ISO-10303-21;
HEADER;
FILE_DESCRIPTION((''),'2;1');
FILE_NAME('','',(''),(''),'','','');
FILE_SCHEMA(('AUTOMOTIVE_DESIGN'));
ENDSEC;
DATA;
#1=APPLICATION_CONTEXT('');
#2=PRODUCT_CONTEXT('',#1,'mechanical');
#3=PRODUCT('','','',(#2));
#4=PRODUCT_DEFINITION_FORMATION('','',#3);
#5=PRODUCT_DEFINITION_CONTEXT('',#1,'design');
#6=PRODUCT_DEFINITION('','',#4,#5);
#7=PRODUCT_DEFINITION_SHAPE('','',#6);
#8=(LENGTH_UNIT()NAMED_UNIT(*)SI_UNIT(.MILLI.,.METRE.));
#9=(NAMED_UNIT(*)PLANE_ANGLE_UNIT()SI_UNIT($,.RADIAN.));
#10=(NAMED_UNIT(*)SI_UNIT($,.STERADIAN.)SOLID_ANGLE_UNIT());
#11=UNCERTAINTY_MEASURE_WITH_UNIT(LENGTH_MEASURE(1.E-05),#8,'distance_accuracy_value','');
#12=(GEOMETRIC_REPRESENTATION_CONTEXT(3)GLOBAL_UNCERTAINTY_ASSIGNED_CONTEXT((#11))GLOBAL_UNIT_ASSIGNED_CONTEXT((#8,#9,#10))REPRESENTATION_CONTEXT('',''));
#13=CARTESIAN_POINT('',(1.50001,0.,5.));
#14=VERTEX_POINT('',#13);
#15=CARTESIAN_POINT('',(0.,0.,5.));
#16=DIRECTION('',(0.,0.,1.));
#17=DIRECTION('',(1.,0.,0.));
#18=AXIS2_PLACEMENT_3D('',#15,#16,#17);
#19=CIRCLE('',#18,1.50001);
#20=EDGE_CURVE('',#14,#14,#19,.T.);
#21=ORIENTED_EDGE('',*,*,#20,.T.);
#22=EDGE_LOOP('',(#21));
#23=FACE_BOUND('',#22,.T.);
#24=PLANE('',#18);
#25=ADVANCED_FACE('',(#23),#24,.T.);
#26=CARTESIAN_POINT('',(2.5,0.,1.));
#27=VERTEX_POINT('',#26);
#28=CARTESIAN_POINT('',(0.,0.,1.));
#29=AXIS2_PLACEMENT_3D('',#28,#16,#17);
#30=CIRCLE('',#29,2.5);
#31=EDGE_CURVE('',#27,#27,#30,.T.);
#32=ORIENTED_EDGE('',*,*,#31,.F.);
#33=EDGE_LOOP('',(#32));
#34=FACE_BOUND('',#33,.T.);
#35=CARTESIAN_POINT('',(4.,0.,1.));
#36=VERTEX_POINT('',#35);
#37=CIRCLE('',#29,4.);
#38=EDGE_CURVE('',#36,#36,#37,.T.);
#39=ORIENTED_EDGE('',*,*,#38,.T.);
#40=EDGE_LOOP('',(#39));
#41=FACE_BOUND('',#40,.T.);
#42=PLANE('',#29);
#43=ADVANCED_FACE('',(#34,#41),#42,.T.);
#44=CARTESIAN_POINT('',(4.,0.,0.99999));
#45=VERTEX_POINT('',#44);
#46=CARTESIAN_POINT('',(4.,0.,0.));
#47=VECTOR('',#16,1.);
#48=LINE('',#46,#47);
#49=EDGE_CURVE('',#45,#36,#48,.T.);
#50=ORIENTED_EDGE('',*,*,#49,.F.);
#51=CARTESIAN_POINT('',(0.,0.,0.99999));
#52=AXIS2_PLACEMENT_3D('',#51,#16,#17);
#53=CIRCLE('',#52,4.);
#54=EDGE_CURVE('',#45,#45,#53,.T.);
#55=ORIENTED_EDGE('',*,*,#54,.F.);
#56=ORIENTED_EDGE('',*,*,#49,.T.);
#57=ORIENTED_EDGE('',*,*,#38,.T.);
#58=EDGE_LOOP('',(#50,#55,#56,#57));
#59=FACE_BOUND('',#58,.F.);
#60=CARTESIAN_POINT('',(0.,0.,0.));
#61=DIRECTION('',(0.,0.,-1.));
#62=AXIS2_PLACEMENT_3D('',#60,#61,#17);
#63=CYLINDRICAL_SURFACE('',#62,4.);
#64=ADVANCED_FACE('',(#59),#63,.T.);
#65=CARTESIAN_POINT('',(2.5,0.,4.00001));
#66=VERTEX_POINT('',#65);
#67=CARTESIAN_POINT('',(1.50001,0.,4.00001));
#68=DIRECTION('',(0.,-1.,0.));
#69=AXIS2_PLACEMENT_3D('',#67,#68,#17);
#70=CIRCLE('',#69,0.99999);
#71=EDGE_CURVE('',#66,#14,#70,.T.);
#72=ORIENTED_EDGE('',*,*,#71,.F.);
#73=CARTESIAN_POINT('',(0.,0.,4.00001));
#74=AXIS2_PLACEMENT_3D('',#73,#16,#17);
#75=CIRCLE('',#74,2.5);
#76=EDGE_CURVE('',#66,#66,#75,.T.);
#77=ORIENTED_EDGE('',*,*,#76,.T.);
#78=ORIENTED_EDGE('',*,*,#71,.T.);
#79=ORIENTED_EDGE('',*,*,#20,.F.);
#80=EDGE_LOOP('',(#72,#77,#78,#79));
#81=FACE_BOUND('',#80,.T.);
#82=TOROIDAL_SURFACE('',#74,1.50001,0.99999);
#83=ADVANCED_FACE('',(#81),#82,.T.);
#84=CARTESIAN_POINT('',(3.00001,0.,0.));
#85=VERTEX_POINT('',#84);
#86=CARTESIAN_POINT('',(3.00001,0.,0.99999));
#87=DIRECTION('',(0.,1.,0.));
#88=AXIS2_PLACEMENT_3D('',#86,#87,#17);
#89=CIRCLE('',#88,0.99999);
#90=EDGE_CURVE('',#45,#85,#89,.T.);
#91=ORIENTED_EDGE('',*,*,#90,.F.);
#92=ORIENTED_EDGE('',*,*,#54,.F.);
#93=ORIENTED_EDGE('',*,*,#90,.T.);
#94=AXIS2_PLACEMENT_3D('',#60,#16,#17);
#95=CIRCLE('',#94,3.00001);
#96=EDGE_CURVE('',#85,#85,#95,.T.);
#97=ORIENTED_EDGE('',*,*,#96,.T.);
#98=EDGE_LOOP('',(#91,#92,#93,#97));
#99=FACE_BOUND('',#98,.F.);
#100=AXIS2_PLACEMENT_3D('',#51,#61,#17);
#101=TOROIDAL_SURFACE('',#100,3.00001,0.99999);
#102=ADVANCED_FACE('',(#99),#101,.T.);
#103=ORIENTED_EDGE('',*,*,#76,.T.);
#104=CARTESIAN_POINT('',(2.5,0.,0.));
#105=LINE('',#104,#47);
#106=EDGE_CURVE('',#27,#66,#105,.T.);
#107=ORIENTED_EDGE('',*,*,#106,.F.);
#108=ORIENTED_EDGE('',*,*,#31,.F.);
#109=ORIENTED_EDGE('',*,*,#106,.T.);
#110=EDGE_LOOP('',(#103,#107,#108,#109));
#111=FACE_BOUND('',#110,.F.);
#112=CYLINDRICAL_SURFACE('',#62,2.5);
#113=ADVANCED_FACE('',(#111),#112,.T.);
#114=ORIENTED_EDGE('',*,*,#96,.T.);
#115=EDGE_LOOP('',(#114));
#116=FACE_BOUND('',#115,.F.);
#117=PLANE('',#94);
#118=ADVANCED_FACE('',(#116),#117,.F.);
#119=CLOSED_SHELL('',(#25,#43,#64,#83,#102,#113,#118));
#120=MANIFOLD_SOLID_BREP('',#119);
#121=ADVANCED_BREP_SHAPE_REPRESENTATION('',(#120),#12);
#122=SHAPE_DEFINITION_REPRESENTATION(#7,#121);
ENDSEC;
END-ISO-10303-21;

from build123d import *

# Parameters (mm, degrees)
F0_R     = 2.5
F1_DEPTH = 5
F0_R_2   = 4
F2_DEPTH = 1
F3_R     = 0.99999


# Not quite as in the source:
# - a fillet or chamfer is up to 0.001 mm smaller than in the source, because OpenCascade refuses the exact size


with BuildPart() as f1:
    # F0 (on Top) → F1 (new body)
    with BuildSketch(Plane.XY):
        Circle(F0_R)
    extrude(amount=F1_DEPTH)

    # F0 (on Top) → F2 (join)
    with BuildSketch(Plane.XY):
        Circle(F0_R_2)
        Circle(F0_R, mode=Mode.SUBTRACT)
    extrude(amount=F2_DEPTH)

    # F3 (radius 1 in the source; OpenCascade refuses exactly that, so slightly less here)
    f3_edges = [f1.edges().sort_by_distance(p)[0] for p in [
        (-4, 0, 0),
        (-2.5, 0, 5),
    ]]
    fillet(f3_edges, radius=F3_R)


solid = f1.part
